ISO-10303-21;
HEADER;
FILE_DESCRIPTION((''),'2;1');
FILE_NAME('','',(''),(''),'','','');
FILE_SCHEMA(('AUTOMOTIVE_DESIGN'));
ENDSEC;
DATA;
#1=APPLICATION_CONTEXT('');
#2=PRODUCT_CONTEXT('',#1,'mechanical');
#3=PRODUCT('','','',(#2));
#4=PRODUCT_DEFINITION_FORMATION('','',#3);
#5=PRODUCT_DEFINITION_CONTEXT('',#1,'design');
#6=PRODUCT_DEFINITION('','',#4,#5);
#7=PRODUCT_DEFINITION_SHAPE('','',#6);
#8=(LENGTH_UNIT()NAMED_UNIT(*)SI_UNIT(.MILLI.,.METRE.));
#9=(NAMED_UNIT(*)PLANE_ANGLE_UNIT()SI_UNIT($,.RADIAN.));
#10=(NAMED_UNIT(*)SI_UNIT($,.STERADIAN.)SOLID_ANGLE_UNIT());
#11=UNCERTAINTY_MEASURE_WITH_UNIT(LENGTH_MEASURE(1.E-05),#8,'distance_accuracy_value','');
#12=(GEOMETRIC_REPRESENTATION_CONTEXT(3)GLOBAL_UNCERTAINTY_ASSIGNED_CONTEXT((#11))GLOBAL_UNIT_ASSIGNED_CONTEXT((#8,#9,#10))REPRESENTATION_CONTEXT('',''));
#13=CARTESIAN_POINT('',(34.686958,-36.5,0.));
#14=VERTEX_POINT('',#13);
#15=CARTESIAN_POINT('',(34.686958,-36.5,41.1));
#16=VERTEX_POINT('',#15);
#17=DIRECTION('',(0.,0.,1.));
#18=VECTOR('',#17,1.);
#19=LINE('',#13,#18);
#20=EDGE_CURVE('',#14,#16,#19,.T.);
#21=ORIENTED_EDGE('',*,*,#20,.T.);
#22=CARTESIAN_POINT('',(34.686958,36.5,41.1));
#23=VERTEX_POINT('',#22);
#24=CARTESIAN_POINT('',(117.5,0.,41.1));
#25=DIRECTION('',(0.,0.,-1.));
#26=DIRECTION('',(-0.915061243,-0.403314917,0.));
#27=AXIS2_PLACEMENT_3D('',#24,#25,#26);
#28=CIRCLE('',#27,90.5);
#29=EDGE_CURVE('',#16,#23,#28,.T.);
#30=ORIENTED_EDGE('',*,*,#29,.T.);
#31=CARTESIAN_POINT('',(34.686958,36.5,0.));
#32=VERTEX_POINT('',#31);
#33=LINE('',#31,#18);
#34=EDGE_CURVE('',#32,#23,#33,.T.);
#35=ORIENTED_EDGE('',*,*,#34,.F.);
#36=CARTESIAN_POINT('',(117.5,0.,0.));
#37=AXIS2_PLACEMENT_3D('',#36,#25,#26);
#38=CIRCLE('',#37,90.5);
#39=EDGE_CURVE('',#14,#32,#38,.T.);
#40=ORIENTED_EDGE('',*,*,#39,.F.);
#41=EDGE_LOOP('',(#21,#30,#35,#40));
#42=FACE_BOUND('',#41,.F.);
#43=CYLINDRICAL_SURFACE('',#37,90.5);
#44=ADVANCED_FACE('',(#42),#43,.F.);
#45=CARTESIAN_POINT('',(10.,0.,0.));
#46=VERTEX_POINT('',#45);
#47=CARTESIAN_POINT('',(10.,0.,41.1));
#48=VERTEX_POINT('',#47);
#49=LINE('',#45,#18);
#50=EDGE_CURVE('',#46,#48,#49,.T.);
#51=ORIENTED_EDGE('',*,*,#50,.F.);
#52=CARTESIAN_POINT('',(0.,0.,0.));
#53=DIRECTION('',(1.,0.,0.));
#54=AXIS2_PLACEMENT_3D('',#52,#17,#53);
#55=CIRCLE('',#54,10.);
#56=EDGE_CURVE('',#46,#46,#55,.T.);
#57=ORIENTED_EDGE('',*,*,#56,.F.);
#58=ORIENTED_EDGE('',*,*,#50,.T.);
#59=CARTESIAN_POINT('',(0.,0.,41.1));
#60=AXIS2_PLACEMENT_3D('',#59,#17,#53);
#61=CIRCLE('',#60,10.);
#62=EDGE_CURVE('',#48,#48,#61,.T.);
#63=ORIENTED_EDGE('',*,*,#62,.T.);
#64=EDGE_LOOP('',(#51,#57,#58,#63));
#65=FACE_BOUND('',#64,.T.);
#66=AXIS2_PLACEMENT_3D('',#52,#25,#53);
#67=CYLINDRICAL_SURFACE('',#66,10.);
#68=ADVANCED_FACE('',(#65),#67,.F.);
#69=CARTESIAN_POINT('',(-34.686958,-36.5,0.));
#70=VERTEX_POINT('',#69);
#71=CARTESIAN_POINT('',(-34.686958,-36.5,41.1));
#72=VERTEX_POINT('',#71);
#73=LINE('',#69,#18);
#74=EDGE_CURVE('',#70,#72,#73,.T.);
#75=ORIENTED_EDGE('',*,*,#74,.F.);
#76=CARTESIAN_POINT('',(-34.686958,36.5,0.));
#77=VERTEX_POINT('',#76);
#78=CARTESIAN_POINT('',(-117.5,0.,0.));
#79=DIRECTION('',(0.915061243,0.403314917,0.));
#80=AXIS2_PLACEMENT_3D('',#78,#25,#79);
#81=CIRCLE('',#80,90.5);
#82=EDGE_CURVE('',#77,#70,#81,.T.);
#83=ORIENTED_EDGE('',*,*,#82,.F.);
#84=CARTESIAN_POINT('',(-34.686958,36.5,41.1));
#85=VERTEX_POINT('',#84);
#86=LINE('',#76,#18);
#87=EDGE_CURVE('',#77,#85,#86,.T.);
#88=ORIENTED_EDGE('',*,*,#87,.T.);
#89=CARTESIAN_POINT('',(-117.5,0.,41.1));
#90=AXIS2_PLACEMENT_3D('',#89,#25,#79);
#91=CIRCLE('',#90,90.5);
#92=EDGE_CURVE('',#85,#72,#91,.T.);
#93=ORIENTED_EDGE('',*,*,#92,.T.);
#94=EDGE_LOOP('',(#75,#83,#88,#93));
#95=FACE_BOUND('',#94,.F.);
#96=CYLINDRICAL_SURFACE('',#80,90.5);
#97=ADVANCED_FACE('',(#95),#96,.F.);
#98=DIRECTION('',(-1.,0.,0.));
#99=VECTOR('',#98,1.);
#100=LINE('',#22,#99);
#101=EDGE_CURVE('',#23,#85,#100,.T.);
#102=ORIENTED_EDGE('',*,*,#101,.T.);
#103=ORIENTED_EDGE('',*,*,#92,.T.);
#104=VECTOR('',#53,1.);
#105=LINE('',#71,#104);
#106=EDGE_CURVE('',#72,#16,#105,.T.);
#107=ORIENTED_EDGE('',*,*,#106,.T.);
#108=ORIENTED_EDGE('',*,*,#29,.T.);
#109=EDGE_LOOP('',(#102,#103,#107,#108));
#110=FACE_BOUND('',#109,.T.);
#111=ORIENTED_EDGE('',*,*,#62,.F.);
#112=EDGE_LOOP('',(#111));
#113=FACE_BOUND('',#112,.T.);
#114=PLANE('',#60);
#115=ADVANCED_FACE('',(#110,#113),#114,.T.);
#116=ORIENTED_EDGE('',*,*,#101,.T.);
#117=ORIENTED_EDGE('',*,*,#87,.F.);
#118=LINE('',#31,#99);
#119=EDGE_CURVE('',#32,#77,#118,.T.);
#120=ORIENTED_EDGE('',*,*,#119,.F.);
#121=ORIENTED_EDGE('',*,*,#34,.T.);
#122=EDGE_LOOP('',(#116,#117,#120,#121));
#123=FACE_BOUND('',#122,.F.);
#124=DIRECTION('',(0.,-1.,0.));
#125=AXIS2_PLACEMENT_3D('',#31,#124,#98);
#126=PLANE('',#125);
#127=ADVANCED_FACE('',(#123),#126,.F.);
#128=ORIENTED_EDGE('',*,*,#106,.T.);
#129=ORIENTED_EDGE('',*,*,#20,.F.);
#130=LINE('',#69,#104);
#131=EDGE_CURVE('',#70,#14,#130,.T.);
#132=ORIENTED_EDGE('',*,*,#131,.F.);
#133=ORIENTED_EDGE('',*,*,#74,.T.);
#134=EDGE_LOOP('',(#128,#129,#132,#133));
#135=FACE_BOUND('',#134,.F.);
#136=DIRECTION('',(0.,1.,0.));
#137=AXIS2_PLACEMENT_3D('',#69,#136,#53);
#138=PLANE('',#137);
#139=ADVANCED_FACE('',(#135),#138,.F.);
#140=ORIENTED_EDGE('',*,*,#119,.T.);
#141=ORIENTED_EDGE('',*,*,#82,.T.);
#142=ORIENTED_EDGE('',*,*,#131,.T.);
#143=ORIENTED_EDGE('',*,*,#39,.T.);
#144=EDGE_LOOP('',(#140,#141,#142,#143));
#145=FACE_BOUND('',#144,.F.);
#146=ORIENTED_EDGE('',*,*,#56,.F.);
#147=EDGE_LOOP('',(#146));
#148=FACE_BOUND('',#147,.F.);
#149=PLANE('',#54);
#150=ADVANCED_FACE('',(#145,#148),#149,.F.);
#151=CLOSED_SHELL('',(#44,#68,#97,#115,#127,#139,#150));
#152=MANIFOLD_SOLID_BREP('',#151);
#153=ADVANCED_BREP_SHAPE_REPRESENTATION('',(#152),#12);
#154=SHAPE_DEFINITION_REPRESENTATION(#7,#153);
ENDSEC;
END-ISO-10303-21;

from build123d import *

# Parameters (mm, degrees)
F0_R     = 10
F1_DEPTH = 41.1


# Not quite as in the source:
# - a feature names something its author has since deleted; it is built from what else it names


with BuildPart() as f1:
    # F0 (on Top) → F1 (new body)
    with BuildSketch(Plane.XY):
        with BuildLine():
            ThreePointArc((-34.6869575489, 36.5), (-27, 0), (-34.6869575489, -36.5))
            Line((-34.6869575489, -36.5), (34.6869575489, -36.5))
            ThreePointArc((34.6869575489, -36.5), (27, 0), (34.6869575489, 36.5))
            Line((34.6869575489, 36.5), (-34.6869575489, 36.5))
        make_face()
        Circle(F0_R, mode=Mode.SUBTRACT)
    extrude(amount=F1_DEPTH)


solid = f1.part
